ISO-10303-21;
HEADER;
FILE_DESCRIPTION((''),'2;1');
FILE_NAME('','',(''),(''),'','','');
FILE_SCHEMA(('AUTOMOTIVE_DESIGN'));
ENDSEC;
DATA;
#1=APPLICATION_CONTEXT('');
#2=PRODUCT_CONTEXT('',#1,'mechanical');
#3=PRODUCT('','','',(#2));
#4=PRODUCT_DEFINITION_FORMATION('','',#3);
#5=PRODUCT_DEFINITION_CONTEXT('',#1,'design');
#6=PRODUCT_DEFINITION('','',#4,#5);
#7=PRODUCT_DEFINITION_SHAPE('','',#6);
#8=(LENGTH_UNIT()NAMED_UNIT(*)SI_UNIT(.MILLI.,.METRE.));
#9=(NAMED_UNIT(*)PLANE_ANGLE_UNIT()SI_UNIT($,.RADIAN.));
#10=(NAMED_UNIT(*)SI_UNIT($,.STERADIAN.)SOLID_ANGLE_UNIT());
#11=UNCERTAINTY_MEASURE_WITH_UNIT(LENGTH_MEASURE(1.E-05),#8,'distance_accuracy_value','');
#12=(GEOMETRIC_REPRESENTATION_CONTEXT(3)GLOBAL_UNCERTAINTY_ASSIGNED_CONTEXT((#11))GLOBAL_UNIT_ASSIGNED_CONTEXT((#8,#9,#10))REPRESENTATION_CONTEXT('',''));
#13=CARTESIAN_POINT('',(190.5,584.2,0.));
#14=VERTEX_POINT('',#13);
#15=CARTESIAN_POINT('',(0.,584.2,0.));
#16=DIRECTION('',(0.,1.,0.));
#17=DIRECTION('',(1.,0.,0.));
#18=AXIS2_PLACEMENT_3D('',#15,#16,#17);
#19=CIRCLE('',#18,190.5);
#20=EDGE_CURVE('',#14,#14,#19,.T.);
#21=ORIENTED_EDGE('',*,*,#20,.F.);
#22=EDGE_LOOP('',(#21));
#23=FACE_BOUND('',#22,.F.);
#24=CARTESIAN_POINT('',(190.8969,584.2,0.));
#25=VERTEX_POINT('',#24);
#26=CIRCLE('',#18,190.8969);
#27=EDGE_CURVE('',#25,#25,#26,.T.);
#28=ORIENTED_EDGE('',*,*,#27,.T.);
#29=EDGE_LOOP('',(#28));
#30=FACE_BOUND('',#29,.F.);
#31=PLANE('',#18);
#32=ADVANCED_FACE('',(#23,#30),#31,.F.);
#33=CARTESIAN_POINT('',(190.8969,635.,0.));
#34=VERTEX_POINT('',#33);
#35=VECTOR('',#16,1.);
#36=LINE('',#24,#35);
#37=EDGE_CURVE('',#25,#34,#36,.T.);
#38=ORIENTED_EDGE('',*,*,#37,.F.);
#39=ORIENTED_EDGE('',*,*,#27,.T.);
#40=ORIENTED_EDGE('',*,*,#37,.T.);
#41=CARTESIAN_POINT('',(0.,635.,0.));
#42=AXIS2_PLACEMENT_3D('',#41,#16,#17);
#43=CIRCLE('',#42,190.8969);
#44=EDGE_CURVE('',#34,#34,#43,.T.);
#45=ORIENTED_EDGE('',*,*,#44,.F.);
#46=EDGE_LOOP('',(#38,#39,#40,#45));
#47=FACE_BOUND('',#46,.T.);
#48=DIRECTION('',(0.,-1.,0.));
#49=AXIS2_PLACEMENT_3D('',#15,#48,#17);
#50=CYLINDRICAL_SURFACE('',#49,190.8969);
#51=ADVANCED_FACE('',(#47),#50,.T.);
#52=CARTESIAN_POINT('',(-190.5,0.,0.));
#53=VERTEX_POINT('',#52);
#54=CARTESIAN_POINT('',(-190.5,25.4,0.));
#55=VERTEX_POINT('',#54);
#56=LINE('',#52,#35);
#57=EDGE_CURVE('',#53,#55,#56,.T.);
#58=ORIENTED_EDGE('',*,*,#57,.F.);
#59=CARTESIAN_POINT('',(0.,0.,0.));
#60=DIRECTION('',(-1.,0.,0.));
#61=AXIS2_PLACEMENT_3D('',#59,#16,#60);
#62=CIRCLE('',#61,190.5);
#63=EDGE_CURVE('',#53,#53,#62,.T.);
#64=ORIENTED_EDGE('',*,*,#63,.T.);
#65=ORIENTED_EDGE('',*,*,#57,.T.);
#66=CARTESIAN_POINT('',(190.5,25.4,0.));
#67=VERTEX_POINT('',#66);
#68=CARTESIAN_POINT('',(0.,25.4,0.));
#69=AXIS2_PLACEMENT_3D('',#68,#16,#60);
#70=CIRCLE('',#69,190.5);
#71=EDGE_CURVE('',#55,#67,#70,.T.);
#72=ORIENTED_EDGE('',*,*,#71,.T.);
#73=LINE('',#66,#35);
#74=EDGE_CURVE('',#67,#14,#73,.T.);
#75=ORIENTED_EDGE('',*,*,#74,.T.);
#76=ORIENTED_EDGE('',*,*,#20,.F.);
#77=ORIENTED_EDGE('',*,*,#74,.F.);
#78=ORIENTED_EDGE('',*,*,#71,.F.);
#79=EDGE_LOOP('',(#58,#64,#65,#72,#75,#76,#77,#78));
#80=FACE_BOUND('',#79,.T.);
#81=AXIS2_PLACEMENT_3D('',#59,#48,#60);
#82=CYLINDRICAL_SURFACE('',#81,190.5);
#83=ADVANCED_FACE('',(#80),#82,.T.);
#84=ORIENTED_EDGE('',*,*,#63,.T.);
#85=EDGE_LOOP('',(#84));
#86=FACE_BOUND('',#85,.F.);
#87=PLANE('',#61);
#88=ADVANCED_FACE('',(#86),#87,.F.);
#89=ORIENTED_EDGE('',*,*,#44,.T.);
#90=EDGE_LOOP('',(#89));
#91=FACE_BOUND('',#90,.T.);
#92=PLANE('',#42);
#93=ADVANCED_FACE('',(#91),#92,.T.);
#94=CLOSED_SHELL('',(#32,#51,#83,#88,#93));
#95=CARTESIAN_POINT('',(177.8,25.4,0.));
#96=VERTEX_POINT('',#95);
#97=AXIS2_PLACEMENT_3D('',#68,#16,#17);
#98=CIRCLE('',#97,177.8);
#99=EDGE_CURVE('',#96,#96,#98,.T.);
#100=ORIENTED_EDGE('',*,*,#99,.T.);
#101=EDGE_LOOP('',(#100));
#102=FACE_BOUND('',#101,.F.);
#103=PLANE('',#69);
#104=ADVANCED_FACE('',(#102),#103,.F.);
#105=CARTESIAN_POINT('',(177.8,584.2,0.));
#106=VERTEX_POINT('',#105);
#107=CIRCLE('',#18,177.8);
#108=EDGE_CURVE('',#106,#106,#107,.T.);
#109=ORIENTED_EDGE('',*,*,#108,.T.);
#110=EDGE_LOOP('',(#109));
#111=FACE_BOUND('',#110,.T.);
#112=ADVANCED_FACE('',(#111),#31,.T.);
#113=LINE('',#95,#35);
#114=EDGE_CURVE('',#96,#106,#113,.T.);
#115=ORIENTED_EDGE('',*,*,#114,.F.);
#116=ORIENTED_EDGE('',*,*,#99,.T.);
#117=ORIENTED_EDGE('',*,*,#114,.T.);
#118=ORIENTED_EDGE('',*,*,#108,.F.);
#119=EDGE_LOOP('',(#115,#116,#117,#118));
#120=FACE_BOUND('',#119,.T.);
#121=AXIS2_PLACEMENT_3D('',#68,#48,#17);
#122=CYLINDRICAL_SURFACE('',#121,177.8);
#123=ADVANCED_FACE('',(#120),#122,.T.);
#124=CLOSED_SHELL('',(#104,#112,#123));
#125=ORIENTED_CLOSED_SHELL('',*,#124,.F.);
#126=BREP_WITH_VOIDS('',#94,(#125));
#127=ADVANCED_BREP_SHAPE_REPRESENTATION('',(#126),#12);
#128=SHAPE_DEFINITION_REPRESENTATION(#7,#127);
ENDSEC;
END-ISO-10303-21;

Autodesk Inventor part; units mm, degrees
ref_plane "YZ Plane" through (0, 0, 0) normal (1, 0, 0) x (0, 1, 0)
ref_plane "XZ Plane" through (0, 0, 0) normal (0, 1, 0) x (-1, 0, 0)
ref_plane "XY Plane" through (0, 0, 0) normal (0, 0, 1) x (1, 0, 0)
sketch "Sketch1" plane through (0, 0, 0) normal (0, 1, 0) x (-1, 0, 0)
  circle A0 centre (0, 0) radius 190.5
  dimension "d0" = 381
extrude "Extrusion1" add sketch "Sketch1" along normal blind 25.4
sketch "Sketch2" plane through (0, 25.4, 0) normal (0, 1, 0) x (1, 0, 0)
  circle A0 centre (0, 0) radius 177.8
  circle A1 centre (0, 0) radius 190.5 projected
  dimension "d3" = 355.6
extrude "Extrusion2" add sketch "Sketch2" along normal blind 558.8
sketch "Sketch3" plane through (0, 584.2, 0) normal (0, 1, 0) x (1, 0, 0)
  circle A0 centre (0, 0) radius 190.8969
  dimension "d6" = 381.7937
extrude "Extrusion3" add sketch "Sketch3" along normal blind 50.8
ref_plane "Work Plane2" through (190.5, 0, 0) normal (1, 0, 0) x (0, 1, 0)
ref_plane "Work Plane1" through (228.6, -12.7, -4375.1201) normal (1, 0, 0) x (0, 1, 0)
ref_plane "Work Plane4" through (0, 0, 190.5) normal (0, 0, 1) x (1, 0, 0)
ref_plane "Work Plane3" through (-228.6, -12.7, 203.2) normal (0, 0, 1) x (1, 0, 0)
properties part number "Tun-Placeholder"
